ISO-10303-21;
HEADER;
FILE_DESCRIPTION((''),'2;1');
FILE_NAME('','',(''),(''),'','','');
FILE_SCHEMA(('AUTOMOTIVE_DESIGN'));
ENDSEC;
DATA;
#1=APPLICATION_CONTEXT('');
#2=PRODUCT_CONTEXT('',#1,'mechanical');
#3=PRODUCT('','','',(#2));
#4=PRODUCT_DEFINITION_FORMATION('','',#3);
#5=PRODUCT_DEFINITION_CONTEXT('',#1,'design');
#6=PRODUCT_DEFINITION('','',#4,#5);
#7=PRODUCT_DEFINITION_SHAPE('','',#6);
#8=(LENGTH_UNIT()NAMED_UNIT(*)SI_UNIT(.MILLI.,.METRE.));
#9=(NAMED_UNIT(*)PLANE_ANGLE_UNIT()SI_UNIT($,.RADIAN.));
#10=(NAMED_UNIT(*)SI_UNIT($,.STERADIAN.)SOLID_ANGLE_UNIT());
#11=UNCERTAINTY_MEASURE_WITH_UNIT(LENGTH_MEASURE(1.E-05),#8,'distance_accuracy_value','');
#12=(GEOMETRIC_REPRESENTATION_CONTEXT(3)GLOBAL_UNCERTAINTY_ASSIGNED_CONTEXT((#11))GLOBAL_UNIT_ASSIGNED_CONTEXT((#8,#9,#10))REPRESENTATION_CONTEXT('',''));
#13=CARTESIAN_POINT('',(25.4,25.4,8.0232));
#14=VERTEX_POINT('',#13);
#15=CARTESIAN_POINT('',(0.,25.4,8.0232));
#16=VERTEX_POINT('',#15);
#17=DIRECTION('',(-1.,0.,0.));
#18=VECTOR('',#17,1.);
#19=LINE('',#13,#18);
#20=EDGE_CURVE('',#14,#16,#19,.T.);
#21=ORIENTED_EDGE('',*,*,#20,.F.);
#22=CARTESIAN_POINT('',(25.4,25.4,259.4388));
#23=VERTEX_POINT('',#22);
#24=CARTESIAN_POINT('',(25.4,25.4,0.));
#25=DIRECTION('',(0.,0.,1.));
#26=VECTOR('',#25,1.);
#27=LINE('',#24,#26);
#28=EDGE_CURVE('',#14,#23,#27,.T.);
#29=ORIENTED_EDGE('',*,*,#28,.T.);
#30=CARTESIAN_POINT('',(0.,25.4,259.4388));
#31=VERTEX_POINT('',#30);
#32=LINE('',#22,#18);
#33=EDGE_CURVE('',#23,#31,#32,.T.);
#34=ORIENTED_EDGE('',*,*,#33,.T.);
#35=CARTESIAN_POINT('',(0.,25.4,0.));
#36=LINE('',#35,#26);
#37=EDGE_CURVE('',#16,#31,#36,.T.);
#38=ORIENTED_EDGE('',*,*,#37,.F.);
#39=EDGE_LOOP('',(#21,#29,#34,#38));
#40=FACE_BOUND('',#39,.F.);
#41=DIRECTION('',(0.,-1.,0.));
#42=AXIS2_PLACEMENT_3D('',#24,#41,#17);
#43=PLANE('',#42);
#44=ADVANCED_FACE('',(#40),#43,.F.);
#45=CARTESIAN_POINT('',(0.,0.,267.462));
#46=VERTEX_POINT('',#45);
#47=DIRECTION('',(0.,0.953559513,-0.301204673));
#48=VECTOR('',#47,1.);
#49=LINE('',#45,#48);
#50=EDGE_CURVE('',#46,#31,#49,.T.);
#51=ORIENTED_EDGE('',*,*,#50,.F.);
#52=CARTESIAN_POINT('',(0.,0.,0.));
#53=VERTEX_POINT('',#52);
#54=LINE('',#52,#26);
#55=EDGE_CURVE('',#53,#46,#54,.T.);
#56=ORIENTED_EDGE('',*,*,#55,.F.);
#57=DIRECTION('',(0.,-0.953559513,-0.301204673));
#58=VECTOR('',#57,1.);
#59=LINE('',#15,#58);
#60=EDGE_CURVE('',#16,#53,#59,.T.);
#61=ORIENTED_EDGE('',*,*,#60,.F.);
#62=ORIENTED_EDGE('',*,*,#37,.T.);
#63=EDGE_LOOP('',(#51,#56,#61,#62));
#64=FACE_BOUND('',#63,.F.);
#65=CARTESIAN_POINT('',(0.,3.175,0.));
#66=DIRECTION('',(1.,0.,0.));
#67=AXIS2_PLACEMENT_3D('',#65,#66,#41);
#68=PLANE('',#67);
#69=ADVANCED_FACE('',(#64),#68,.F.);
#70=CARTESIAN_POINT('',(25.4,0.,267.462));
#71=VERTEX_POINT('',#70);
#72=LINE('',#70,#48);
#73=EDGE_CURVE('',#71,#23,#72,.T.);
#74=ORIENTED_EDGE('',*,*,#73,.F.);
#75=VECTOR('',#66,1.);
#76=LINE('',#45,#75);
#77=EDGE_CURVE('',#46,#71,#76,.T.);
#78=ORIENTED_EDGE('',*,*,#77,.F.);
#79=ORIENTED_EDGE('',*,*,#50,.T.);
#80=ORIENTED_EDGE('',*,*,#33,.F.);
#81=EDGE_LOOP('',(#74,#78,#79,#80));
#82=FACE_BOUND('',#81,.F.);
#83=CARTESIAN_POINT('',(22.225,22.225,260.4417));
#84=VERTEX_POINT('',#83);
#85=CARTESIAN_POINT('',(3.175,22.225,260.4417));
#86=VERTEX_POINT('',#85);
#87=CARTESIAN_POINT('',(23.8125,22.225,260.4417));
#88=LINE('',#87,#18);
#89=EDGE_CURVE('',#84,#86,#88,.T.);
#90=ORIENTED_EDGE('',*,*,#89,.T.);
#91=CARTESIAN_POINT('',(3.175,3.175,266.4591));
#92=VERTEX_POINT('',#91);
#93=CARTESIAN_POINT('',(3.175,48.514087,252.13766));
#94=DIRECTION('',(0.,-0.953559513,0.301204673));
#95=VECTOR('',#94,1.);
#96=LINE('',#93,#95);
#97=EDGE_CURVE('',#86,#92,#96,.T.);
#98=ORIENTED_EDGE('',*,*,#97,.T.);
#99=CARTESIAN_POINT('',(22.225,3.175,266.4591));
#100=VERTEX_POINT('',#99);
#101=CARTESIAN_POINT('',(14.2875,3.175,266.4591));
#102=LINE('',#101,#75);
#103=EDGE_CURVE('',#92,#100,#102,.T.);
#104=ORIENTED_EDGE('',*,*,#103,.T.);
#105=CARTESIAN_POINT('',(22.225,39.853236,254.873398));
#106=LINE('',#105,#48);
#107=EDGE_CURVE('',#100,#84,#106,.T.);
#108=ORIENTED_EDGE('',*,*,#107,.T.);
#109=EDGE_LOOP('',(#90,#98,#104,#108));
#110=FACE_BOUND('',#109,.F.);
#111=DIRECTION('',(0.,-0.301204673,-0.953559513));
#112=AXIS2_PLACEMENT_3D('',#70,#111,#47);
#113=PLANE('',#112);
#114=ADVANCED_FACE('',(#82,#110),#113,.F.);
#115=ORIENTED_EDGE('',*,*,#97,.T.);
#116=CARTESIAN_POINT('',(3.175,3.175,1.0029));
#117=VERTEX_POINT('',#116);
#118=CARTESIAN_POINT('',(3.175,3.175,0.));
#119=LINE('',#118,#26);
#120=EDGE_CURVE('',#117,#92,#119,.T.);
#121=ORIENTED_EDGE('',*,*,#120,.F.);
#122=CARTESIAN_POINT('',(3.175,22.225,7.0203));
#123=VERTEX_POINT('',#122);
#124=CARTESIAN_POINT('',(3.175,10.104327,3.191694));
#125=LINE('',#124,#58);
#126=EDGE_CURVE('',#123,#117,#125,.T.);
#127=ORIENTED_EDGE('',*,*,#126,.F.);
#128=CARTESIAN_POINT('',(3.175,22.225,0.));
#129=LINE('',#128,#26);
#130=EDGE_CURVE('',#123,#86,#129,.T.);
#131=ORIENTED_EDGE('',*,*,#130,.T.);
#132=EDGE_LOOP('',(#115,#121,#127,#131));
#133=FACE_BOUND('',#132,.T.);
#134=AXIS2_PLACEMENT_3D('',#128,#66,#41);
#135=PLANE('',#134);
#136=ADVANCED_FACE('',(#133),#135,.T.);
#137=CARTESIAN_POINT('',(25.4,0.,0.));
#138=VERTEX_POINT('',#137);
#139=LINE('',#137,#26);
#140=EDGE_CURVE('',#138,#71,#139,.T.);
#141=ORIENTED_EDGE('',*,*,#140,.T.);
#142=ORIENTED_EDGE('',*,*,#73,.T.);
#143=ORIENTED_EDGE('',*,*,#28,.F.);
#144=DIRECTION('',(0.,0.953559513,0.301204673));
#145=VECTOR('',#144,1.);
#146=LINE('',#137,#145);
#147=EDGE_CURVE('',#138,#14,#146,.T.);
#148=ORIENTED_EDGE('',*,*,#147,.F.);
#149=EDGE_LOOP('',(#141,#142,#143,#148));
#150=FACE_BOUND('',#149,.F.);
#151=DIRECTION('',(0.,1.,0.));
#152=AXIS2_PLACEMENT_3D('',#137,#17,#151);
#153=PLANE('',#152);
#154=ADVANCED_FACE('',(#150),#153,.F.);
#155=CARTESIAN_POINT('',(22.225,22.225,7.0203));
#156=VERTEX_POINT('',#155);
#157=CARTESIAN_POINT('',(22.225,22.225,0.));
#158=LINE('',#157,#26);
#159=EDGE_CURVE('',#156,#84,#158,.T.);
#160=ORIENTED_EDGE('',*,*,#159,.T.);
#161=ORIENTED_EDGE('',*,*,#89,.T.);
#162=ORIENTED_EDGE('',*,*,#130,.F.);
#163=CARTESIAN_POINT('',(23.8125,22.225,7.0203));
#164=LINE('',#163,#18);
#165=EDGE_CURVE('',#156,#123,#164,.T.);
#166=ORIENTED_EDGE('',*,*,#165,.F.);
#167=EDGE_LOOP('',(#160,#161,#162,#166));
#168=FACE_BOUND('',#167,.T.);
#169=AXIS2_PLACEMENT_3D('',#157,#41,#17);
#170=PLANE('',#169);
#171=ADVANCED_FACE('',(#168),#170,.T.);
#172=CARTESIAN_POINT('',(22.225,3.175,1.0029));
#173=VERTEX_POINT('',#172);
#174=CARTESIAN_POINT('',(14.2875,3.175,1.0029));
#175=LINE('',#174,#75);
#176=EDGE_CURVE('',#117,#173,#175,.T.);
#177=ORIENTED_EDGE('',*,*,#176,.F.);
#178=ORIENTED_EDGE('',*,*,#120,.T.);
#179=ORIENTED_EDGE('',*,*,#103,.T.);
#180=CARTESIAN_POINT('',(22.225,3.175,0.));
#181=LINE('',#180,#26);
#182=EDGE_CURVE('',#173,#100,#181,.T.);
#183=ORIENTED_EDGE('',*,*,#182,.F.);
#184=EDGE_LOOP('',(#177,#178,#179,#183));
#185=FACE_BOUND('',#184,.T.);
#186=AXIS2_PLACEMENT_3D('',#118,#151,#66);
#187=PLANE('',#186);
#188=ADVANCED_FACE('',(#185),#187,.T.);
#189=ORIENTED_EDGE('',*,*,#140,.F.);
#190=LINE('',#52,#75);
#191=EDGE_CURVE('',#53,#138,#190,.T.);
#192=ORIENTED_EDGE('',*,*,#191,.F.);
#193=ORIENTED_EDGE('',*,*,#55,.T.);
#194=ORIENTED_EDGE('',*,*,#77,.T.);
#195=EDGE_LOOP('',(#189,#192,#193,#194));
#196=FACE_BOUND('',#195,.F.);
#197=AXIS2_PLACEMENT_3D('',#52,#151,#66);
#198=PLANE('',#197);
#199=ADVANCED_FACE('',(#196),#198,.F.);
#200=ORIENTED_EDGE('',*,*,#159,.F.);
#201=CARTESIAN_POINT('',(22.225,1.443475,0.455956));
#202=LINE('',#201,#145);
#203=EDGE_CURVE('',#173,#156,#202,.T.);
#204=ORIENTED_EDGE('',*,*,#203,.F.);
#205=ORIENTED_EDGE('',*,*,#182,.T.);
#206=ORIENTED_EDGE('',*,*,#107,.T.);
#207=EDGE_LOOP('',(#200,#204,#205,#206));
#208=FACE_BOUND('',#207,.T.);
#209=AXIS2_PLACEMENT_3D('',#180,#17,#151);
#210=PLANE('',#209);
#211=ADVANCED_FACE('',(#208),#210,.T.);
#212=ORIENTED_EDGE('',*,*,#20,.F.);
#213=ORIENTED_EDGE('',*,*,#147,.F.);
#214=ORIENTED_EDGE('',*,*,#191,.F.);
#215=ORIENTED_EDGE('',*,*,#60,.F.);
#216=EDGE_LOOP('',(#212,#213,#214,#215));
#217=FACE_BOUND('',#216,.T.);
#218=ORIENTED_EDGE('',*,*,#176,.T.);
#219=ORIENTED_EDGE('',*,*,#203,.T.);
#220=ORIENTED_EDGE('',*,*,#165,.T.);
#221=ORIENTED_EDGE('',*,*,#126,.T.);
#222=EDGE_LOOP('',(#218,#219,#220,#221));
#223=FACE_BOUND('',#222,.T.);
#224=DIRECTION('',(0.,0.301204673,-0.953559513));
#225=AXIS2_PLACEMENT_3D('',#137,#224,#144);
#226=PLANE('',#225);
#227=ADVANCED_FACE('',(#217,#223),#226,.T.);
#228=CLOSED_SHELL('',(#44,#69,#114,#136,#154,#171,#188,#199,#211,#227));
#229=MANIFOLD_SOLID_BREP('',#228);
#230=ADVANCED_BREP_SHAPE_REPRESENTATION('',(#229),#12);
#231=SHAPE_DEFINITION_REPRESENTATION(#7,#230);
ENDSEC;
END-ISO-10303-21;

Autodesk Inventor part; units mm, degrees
ref_plane "YZ Plane" through (0, 0, 0) normal (1, 0, 0) x (0, 1, 0)
ref_plane "XZ Plane" through (0, 0, 0) normal (0, 1, 0) x (-1, 0, 0)
ref_plane "XY Plane" through (0, 0, 0) normal (0, 0, 1) x (1, 0, 0)
sketch "Sketch1" plane through (0, 0, 0) normal (0, 0, 1) x (1, 0, 0)
  line L0 (0, 0) -> (25.4, 0)
  line L1 (25.4, 0) -> (25.4, 25.4)
  line L2 (25.4, 25.4) -> (0, 25.4)
  line L3 (0, 25.4) -> (0, 0)
  line L4 (0, 0) -> (0, 3.175)
  line L5 (0, 3.175) -> (3.175, 3.175)
  line L6 (3.175, 3.175) -> (22.225, 3.175)
  line L7 (22.225, 3.175) -> (22.225, 22.225)
  line L8 (22.225, 22.225) -> (3.175, 22.225)
  line L9 (3.175, 22.225) -> (3.175, 3.175)
  dimension "d0" = 25.4
  dimension "d1" = 25.4
  dimension "d2" = 3.175
  dimension "d3" = 3.175
  dimension "d4" = 19.05
  dimension "d5" = 19.05
extrude "Extrusion1" add sketch "Sketch1" along normal blind 267.462
sketch "Sketch2" plane through (25.4, 0, 0) normal (1, 0, 0) x (0, 0, -1)
  line L0 (0, 0) -> (0, 25.4) projected
  line L1 (0, 25.4) -> (-267.462, 25.4) projected
  line L2 (-267.462, 0) -> (-267.462, 25.4) projected
  line L3 (-267.462, 0) -> (-259.4388, 25.4)
  line L4 (-267.462, 0) -> (-240.825, 0) construction
  line L5 (0, 0) -> (-8.0232, 25.4)
  line L6 (0, 0) -> (26.637, 0) construction
  line L7 (-259.4388, 25.4) -> (-267.462, 25.4)
  line L8 (-267.462, 0) -> (-267.462, 25.4)
  line L9 (-8.0232, 25.4) -> (0, 25.4)
  line L10 (0, 25.4) -> (0, 0)
  dimension "d8" = 72.47
  dimension "d9" = 107.53
extrude "Extrusion2" cut sketch "Sketch2" against normal up to next
properties part number "midBrace"
